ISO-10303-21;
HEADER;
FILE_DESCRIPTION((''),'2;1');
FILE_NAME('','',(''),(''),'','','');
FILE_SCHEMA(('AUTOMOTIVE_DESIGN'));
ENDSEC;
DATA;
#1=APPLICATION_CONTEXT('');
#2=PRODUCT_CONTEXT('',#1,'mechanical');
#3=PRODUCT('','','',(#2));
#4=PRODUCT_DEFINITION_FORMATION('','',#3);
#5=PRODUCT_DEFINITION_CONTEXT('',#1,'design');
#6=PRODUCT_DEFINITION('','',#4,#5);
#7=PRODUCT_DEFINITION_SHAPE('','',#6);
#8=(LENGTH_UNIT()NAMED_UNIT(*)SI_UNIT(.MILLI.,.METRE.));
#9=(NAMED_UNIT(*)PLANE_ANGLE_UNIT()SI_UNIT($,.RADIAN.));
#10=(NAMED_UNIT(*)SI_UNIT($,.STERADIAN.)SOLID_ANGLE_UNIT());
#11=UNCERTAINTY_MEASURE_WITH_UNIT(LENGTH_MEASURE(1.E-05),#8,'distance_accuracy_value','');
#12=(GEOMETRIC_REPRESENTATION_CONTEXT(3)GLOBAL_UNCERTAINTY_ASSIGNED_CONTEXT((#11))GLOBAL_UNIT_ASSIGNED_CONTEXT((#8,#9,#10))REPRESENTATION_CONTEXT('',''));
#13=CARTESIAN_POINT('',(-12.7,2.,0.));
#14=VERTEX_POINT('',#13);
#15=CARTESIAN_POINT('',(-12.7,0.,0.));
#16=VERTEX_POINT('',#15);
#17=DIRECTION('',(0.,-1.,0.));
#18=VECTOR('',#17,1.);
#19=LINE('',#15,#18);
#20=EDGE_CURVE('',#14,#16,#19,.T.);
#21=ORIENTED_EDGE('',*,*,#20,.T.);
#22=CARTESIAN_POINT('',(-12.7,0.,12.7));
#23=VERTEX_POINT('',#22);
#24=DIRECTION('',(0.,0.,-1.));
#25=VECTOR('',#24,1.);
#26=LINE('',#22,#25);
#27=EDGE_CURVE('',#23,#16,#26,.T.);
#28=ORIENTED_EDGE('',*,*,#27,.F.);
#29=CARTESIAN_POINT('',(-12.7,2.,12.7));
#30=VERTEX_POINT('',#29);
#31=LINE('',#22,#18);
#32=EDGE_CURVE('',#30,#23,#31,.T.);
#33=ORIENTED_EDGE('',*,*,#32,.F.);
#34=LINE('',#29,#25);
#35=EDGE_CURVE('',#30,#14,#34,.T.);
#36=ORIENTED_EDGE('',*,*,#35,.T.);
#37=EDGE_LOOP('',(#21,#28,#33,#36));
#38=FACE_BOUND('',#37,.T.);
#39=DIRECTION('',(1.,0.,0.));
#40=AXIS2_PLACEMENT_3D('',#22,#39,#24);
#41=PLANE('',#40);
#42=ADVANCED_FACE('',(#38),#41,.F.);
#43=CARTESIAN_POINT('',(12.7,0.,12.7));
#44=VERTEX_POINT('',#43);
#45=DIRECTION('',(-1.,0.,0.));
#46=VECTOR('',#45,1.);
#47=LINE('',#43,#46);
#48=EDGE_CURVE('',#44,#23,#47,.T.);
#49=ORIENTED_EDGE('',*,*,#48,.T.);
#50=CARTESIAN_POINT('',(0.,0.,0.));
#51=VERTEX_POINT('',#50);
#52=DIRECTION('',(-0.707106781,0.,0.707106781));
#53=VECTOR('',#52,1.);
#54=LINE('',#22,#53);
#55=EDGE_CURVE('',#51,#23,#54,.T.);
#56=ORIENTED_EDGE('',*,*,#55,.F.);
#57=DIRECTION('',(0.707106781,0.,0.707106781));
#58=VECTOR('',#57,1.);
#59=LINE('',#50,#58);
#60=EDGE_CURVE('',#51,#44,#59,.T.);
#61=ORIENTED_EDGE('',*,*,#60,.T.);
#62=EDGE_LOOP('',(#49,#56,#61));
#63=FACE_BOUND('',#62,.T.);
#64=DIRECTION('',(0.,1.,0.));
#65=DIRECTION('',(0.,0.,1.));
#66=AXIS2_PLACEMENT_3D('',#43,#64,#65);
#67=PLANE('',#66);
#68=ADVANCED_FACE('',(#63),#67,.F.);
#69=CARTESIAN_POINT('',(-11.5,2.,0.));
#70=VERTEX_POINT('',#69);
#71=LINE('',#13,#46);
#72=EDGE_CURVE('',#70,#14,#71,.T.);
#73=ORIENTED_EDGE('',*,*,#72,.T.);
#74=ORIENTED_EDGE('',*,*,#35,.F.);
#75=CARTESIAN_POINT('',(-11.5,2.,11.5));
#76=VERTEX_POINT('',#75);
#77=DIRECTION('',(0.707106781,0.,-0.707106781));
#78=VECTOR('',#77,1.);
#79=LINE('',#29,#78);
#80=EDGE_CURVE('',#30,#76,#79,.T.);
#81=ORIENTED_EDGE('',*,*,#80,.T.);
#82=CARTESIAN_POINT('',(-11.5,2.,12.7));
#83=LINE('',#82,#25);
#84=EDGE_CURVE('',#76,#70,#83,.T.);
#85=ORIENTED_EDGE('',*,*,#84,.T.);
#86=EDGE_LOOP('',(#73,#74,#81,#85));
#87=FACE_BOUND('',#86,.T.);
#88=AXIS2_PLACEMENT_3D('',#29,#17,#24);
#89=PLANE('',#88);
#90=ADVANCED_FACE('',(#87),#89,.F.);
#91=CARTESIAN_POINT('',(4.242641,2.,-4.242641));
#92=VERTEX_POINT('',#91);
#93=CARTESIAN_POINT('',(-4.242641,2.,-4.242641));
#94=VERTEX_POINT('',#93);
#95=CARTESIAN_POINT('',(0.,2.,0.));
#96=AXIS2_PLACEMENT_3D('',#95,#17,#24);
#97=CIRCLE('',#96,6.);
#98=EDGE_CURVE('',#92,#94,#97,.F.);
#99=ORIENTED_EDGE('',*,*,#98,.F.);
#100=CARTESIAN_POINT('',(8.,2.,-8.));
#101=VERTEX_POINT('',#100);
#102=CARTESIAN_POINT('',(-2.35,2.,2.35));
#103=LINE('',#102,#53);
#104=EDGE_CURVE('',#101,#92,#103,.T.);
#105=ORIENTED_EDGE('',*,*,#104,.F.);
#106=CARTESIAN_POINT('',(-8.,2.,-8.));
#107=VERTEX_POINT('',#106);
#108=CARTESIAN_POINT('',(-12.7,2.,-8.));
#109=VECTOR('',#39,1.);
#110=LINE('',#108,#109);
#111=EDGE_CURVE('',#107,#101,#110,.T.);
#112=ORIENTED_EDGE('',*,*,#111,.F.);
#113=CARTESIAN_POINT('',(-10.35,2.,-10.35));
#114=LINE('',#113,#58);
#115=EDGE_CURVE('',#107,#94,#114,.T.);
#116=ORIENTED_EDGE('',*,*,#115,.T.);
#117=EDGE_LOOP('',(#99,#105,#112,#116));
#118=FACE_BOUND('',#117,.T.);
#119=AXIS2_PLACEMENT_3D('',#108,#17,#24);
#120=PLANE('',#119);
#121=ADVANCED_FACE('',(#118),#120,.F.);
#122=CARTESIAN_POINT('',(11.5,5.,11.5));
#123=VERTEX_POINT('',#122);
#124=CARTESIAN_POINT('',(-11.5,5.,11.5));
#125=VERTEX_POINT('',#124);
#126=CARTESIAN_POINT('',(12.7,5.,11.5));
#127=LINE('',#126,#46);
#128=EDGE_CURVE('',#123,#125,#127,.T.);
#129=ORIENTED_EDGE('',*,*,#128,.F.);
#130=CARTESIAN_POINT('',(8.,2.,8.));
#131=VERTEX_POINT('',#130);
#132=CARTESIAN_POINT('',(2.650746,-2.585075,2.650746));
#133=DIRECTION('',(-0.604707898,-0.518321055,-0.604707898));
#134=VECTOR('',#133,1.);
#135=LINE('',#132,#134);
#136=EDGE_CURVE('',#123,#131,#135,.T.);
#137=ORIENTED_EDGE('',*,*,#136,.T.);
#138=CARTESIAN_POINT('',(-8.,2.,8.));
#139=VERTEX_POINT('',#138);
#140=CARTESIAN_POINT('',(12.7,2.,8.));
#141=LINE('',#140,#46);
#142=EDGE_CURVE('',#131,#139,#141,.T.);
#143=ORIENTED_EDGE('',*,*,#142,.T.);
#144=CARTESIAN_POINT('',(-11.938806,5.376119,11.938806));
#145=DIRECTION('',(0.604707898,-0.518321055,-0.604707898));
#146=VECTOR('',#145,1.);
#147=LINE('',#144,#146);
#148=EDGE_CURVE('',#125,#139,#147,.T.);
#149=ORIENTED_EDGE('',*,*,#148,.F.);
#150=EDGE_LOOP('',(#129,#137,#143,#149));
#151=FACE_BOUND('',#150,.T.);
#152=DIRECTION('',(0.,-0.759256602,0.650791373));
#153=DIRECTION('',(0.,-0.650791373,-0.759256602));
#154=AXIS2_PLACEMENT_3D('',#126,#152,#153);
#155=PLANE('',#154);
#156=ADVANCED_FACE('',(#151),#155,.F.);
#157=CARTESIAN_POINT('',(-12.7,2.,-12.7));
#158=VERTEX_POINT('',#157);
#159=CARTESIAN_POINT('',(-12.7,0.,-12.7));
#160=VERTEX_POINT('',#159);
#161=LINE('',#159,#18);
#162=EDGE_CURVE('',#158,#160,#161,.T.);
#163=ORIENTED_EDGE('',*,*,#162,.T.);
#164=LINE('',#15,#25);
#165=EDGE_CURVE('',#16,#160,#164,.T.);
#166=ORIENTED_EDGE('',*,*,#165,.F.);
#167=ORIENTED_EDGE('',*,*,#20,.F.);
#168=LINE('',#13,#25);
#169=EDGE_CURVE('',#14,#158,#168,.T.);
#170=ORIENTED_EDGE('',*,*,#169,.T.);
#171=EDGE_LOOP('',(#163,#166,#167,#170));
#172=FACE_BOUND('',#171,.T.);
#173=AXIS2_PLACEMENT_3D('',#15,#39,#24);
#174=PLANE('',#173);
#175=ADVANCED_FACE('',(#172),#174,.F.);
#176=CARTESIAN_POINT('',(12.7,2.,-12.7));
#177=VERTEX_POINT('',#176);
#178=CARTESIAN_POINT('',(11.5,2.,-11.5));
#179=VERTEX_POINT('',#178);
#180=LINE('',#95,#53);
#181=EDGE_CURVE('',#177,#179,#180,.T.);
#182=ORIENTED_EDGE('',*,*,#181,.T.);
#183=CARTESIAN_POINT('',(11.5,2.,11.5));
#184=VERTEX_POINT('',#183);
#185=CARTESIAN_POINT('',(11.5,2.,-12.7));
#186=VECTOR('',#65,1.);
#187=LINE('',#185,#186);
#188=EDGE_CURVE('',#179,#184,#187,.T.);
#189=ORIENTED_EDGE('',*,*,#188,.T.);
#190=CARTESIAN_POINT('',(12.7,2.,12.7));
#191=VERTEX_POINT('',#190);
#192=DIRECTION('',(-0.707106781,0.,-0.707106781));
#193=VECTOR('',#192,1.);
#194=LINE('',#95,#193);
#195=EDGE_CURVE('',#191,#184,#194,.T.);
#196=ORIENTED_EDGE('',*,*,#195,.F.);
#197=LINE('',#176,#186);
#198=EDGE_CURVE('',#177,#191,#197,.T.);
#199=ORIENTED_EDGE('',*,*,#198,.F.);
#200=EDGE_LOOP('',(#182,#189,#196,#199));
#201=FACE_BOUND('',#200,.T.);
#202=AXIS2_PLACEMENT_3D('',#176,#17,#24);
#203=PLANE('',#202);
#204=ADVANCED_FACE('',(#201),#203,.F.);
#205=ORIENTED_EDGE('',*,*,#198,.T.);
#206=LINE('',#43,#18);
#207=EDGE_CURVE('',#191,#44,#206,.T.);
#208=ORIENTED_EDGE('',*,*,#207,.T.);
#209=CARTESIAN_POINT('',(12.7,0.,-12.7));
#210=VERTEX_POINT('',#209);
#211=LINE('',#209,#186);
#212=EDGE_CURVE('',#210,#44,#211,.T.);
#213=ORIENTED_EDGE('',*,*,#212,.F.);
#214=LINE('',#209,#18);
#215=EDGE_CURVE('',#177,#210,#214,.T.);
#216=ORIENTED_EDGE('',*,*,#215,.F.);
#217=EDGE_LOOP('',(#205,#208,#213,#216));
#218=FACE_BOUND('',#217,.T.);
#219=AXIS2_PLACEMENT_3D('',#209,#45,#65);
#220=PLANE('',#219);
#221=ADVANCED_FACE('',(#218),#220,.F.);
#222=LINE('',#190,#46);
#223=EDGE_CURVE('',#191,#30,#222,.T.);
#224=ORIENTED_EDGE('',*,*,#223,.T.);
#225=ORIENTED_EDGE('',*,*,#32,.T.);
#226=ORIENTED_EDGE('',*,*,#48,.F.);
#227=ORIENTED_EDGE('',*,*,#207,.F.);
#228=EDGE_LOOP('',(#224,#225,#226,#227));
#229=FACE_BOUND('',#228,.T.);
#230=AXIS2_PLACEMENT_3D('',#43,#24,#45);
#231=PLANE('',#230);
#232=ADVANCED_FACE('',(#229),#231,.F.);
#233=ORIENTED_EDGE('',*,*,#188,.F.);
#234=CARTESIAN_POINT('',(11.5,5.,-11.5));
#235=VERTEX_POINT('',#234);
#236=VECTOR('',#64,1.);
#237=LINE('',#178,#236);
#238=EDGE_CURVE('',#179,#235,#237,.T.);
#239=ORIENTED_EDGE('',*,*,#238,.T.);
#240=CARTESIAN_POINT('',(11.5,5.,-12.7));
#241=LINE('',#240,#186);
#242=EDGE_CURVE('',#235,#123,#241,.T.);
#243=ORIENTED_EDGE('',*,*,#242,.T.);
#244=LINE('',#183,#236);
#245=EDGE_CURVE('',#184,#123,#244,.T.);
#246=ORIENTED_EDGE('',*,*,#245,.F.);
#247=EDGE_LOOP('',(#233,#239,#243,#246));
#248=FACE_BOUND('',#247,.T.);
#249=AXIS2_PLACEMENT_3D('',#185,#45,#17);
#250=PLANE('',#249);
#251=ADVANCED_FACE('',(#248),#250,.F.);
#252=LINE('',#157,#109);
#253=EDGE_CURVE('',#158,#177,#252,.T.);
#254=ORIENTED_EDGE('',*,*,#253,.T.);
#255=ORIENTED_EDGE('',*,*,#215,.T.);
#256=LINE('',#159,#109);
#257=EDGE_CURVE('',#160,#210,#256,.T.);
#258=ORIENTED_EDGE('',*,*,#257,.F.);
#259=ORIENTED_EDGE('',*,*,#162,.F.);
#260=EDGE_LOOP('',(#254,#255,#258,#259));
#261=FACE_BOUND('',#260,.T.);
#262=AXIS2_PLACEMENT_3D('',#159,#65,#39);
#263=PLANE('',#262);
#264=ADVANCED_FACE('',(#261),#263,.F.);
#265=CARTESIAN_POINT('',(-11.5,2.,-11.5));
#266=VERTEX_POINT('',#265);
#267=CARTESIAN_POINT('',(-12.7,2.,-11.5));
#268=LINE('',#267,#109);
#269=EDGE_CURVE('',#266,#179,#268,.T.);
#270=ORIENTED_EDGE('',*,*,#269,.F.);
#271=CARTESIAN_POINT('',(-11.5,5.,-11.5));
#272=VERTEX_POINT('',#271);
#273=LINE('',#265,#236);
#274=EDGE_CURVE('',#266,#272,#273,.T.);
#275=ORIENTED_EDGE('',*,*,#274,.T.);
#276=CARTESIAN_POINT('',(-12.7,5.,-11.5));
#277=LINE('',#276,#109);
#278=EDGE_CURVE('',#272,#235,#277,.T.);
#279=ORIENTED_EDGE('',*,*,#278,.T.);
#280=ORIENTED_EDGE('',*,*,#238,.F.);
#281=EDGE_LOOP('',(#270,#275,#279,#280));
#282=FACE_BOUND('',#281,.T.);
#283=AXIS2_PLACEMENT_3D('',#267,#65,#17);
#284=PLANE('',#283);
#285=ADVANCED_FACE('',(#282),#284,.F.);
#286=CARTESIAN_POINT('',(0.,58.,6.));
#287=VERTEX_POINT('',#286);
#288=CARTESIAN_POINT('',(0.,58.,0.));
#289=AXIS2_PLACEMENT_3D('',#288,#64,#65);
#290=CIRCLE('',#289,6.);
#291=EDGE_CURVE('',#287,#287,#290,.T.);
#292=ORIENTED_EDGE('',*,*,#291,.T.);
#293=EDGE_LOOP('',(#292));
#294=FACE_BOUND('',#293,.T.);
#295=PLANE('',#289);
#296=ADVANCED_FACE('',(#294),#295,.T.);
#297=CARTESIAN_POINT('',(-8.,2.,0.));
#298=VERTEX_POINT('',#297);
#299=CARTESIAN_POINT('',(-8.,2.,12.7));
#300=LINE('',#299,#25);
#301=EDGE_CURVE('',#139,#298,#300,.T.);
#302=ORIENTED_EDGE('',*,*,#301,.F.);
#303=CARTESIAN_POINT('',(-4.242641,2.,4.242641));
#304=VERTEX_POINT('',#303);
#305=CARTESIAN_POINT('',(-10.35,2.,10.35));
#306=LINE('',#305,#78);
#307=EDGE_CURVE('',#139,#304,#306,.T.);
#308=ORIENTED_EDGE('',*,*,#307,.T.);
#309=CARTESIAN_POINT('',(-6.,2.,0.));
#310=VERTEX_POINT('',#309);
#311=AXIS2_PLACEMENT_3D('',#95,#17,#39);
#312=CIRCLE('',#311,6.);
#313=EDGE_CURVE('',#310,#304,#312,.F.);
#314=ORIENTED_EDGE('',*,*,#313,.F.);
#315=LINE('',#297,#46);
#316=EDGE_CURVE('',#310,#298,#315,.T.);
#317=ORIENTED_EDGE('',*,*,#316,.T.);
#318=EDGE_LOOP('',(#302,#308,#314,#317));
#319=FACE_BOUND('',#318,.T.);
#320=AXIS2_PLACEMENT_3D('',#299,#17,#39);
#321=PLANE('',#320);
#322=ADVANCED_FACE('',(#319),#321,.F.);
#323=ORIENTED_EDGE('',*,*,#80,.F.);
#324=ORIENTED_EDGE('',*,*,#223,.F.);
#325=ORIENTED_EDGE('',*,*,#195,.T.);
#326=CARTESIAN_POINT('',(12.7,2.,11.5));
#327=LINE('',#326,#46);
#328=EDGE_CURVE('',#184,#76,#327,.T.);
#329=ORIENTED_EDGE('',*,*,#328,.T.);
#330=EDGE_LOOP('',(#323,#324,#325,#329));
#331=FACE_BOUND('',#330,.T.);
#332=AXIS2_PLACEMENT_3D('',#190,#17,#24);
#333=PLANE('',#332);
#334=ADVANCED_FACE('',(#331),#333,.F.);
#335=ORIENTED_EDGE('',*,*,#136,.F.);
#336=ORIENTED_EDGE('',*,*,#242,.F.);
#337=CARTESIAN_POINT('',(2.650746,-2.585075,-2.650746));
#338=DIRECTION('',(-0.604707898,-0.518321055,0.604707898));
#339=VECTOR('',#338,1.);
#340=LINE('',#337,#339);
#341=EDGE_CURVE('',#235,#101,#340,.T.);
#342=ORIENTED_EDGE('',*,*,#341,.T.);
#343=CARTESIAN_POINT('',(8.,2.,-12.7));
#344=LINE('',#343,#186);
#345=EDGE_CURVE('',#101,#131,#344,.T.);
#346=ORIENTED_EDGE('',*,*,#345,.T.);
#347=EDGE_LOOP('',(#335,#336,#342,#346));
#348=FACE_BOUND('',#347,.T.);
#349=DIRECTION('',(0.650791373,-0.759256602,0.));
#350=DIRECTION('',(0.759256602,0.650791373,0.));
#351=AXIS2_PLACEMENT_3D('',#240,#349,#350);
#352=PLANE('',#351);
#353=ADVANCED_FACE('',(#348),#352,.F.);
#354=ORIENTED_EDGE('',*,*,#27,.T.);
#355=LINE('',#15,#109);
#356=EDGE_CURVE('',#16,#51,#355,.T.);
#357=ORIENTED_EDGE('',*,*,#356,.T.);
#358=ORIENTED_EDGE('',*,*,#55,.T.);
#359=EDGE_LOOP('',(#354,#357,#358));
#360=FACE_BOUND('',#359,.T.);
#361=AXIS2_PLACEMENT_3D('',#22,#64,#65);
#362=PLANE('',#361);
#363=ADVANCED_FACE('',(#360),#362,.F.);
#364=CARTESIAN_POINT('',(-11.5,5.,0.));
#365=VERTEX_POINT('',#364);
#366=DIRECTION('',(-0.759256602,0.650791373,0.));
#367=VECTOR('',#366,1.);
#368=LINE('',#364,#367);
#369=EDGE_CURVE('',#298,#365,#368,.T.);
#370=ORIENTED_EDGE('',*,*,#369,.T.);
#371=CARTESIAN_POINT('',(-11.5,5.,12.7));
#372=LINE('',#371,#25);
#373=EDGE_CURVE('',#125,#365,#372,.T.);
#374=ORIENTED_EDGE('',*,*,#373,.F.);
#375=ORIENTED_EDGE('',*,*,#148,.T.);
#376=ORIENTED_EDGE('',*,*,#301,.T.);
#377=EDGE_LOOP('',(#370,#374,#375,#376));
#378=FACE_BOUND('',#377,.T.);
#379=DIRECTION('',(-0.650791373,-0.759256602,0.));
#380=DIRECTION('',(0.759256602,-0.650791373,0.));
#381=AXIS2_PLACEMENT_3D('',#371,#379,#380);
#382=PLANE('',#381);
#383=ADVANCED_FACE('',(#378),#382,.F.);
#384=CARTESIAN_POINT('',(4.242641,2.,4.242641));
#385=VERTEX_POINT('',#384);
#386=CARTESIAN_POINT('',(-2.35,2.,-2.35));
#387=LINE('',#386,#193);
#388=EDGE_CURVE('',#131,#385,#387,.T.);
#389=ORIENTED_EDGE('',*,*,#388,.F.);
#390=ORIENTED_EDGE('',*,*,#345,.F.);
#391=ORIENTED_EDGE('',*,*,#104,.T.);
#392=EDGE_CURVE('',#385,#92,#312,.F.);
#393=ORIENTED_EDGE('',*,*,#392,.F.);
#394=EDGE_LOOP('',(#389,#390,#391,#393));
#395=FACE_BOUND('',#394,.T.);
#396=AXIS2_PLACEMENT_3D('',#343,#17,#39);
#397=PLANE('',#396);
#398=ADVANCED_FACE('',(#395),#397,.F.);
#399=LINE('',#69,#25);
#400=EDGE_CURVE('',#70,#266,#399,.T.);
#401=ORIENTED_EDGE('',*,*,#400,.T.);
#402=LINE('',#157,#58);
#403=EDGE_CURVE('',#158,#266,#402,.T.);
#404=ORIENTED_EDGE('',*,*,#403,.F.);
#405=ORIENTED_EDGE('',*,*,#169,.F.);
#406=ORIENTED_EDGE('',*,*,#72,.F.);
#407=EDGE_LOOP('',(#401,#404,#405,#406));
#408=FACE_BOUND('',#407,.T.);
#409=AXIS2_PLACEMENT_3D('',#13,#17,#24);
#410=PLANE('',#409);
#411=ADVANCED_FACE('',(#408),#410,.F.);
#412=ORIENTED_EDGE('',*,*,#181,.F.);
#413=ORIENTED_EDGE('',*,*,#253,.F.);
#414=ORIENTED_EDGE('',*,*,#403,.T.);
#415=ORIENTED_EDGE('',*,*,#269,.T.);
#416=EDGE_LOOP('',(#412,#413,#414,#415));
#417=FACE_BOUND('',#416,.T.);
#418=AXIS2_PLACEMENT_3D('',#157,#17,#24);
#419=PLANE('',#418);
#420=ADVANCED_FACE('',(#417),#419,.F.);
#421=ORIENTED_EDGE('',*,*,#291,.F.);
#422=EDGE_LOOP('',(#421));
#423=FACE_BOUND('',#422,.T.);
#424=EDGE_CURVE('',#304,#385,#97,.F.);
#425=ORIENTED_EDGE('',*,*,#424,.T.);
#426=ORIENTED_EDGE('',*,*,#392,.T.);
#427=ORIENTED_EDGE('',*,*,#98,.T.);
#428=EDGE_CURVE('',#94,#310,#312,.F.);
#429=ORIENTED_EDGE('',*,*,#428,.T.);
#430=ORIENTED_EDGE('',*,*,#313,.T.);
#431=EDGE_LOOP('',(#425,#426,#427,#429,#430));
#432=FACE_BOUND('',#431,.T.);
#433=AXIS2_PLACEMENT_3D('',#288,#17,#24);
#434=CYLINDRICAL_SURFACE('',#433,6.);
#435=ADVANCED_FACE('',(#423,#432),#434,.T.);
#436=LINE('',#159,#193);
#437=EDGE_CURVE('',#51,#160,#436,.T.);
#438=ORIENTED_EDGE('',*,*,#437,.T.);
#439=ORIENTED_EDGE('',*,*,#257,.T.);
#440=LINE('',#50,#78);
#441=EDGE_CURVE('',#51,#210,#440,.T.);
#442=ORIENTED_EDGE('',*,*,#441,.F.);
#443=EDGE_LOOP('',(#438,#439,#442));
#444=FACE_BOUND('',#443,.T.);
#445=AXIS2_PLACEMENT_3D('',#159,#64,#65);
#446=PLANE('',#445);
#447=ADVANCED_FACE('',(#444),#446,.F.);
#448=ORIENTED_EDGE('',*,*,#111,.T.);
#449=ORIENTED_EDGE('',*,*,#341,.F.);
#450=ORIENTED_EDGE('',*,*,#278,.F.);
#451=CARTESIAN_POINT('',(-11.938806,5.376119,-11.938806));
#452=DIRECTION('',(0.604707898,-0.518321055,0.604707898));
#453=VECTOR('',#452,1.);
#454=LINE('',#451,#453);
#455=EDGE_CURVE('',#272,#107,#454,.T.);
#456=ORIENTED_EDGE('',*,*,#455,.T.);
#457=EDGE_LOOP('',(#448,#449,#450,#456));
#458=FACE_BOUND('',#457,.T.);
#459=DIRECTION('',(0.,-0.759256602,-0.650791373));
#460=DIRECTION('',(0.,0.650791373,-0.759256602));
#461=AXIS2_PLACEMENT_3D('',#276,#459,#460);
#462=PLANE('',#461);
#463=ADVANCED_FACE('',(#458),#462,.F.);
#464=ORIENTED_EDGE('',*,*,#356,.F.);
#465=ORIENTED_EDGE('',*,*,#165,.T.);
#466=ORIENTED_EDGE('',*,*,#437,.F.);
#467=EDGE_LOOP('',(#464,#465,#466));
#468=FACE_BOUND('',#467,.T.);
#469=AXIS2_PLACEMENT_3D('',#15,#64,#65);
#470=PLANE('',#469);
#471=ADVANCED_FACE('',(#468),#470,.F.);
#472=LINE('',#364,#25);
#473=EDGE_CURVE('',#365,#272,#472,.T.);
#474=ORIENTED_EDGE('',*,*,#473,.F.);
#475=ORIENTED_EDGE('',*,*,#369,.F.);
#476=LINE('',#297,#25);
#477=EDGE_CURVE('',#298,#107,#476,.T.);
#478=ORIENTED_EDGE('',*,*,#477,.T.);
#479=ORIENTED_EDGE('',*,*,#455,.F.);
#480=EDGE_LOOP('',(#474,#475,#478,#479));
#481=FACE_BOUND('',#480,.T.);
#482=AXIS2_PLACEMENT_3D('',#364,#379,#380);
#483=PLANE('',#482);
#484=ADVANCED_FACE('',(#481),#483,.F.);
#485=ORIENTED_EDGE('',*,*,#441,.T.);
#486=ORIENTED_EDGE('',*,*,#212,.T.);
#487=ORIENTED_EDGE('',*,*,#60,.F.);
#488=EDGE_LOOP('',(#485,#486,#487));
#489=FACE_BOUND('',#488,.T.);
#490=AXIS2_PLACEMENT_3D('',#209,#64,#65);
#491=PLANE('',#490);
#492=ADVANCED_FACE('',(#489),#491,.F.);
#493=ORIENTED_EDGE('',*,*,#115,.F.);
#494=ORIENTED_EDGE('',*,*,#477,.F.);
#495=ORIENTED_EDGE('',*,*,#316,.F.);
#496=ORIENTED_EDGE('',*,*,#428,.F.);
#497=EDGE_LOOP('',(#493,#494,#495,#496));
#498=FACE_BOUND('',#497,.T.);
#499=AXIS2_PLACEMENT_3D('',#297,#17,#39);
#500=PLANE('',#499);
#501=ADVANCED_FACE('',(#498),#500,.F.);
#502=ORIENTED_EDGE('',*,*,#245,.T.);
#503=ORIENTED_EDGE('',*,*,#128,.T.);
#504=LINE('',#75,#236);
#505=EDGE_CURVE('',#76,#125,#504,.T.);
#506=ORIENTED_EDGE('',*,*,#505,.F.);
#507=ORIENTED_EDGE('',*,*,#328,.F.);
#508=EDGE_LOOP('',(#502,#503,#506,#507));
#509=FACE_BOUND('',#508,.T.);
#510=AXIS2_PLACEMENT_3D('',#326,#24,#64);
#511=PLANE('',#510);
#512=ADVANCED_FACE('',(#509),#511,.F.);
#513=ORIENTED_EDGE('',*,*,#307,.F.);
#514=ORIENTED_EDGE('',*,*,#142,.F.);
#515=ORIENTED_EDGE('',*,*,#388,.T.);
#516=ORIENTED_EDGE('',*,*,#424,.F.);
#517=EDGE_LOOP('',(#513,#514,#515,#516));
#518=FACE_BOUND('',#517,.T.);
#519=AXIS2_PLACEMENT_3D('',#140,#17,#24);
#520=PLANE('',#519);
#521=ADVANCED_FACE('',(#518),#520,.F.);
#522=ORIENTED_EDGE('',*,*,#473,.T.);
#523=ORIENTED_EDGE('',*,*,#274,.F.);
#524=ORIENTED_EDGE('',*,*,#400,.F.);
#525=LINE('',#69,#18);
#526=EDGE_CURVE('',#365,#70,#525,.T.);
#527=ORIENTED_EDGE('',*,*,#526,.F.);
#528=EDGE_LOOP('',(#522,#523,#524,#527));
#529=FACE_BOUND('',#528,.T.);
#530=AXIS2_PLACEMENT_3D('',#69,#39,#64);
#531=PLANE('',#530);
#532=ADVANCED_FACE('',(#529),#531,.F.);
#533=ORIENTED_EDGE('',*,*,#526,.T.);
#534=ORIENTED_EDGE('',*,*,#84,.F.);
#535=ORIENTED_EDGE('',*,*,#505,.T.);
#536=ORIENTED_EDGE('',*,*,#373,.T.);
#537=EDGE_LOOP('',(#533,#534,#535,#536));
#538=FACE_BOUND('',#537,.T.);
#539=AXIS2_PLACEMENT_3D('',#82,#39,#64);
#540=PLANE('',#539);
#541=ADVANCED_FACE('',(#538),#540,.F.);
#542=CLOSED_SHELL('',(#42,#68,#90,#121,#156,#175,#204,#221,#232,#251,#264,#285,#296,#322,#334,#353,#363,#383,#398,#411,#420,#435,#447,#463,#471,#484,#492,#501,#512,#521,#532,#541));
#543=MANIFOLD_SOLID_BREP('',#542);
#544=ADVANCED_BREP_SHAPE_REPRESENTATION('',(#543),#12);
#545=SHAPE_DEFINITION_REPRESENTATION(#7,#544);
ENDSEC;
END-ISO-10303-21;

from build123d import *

# Parameters (mm, degrees)
SWEEP1_START        = -11.5
SWEEP1_DEPTH        = 23
SWEEP1_START_2      = -12.7
SWEEP1_2_OUTLINE_W  = 25.4
SWEEP1_2_OUTLINE_H  = 2
SWEEP1_2_DEPTH      = 25.4
SWEEP1_3_DEPTH      = 23
SKETCH3_R           = 6
BOSS_EXTRUDE1_DEPTH = 58


with BuildPart() as part:
    # Sweep1: read off the stored shape, not the designer's step
    # Sweep1 outline → Sweep1 (new body)
    with BuildSketch(Plane.XY.offset(SWEEP1_START)):
        Polygon((12.7, 0), (12.7, 2), (11.5, 2), (11.5, 5), (8, 2), (-8, 2), (-11.5, 5), (-11.5, 2), (-12.7, 2), (-12.7, 0), align=None)
    extrude(amount=SWEEP1_DEPTH)



with BuildPart() as body_2:
    # Sweep1 2 outline → Sweep1 2 (new body)
    with BuildSketch(Plane.XY.offset(SWEEP1_START_2)):
        with Locations((0, 1)):
            Rectangle(SWEEP1_2_OUTLINE_W, SWEEP1_2_OUTLINE_H)
    extrude(amount=SWEEP1_2_DEPTH)


with BuildPart() as part_1:
    add(part.part)

    add(body_2.part)  # Sweep1 3 merges body 2
    # Sweep1 3 outline → Sweep1 3 (add)
    with BuildSketch(Plane.YZ.offset(SWEEP1_START)):
        Polygon((5, -11.5), (2, -8), (2, -11.5), align=None)
        Polygon((5, 11.5), (2, 11.5), (2, 8), align=None)
    extrude(amount=SWEEP1_3_DEPTH)

    # Sketch3 → Boss-Extrude1 (add)
    with BuildSketch(Plane(origin=(0, 0, 0), x_dir=(1, 0, 0), z_dir=(0, 1, 0))):
        with Locations(Location((0, 0, 0), (0, 0, 45))):
            Circle(SKETCH3_R)
    extrude(amount=BOSS_EXTRUDE1_DEPTH)


solid = part_1.part
